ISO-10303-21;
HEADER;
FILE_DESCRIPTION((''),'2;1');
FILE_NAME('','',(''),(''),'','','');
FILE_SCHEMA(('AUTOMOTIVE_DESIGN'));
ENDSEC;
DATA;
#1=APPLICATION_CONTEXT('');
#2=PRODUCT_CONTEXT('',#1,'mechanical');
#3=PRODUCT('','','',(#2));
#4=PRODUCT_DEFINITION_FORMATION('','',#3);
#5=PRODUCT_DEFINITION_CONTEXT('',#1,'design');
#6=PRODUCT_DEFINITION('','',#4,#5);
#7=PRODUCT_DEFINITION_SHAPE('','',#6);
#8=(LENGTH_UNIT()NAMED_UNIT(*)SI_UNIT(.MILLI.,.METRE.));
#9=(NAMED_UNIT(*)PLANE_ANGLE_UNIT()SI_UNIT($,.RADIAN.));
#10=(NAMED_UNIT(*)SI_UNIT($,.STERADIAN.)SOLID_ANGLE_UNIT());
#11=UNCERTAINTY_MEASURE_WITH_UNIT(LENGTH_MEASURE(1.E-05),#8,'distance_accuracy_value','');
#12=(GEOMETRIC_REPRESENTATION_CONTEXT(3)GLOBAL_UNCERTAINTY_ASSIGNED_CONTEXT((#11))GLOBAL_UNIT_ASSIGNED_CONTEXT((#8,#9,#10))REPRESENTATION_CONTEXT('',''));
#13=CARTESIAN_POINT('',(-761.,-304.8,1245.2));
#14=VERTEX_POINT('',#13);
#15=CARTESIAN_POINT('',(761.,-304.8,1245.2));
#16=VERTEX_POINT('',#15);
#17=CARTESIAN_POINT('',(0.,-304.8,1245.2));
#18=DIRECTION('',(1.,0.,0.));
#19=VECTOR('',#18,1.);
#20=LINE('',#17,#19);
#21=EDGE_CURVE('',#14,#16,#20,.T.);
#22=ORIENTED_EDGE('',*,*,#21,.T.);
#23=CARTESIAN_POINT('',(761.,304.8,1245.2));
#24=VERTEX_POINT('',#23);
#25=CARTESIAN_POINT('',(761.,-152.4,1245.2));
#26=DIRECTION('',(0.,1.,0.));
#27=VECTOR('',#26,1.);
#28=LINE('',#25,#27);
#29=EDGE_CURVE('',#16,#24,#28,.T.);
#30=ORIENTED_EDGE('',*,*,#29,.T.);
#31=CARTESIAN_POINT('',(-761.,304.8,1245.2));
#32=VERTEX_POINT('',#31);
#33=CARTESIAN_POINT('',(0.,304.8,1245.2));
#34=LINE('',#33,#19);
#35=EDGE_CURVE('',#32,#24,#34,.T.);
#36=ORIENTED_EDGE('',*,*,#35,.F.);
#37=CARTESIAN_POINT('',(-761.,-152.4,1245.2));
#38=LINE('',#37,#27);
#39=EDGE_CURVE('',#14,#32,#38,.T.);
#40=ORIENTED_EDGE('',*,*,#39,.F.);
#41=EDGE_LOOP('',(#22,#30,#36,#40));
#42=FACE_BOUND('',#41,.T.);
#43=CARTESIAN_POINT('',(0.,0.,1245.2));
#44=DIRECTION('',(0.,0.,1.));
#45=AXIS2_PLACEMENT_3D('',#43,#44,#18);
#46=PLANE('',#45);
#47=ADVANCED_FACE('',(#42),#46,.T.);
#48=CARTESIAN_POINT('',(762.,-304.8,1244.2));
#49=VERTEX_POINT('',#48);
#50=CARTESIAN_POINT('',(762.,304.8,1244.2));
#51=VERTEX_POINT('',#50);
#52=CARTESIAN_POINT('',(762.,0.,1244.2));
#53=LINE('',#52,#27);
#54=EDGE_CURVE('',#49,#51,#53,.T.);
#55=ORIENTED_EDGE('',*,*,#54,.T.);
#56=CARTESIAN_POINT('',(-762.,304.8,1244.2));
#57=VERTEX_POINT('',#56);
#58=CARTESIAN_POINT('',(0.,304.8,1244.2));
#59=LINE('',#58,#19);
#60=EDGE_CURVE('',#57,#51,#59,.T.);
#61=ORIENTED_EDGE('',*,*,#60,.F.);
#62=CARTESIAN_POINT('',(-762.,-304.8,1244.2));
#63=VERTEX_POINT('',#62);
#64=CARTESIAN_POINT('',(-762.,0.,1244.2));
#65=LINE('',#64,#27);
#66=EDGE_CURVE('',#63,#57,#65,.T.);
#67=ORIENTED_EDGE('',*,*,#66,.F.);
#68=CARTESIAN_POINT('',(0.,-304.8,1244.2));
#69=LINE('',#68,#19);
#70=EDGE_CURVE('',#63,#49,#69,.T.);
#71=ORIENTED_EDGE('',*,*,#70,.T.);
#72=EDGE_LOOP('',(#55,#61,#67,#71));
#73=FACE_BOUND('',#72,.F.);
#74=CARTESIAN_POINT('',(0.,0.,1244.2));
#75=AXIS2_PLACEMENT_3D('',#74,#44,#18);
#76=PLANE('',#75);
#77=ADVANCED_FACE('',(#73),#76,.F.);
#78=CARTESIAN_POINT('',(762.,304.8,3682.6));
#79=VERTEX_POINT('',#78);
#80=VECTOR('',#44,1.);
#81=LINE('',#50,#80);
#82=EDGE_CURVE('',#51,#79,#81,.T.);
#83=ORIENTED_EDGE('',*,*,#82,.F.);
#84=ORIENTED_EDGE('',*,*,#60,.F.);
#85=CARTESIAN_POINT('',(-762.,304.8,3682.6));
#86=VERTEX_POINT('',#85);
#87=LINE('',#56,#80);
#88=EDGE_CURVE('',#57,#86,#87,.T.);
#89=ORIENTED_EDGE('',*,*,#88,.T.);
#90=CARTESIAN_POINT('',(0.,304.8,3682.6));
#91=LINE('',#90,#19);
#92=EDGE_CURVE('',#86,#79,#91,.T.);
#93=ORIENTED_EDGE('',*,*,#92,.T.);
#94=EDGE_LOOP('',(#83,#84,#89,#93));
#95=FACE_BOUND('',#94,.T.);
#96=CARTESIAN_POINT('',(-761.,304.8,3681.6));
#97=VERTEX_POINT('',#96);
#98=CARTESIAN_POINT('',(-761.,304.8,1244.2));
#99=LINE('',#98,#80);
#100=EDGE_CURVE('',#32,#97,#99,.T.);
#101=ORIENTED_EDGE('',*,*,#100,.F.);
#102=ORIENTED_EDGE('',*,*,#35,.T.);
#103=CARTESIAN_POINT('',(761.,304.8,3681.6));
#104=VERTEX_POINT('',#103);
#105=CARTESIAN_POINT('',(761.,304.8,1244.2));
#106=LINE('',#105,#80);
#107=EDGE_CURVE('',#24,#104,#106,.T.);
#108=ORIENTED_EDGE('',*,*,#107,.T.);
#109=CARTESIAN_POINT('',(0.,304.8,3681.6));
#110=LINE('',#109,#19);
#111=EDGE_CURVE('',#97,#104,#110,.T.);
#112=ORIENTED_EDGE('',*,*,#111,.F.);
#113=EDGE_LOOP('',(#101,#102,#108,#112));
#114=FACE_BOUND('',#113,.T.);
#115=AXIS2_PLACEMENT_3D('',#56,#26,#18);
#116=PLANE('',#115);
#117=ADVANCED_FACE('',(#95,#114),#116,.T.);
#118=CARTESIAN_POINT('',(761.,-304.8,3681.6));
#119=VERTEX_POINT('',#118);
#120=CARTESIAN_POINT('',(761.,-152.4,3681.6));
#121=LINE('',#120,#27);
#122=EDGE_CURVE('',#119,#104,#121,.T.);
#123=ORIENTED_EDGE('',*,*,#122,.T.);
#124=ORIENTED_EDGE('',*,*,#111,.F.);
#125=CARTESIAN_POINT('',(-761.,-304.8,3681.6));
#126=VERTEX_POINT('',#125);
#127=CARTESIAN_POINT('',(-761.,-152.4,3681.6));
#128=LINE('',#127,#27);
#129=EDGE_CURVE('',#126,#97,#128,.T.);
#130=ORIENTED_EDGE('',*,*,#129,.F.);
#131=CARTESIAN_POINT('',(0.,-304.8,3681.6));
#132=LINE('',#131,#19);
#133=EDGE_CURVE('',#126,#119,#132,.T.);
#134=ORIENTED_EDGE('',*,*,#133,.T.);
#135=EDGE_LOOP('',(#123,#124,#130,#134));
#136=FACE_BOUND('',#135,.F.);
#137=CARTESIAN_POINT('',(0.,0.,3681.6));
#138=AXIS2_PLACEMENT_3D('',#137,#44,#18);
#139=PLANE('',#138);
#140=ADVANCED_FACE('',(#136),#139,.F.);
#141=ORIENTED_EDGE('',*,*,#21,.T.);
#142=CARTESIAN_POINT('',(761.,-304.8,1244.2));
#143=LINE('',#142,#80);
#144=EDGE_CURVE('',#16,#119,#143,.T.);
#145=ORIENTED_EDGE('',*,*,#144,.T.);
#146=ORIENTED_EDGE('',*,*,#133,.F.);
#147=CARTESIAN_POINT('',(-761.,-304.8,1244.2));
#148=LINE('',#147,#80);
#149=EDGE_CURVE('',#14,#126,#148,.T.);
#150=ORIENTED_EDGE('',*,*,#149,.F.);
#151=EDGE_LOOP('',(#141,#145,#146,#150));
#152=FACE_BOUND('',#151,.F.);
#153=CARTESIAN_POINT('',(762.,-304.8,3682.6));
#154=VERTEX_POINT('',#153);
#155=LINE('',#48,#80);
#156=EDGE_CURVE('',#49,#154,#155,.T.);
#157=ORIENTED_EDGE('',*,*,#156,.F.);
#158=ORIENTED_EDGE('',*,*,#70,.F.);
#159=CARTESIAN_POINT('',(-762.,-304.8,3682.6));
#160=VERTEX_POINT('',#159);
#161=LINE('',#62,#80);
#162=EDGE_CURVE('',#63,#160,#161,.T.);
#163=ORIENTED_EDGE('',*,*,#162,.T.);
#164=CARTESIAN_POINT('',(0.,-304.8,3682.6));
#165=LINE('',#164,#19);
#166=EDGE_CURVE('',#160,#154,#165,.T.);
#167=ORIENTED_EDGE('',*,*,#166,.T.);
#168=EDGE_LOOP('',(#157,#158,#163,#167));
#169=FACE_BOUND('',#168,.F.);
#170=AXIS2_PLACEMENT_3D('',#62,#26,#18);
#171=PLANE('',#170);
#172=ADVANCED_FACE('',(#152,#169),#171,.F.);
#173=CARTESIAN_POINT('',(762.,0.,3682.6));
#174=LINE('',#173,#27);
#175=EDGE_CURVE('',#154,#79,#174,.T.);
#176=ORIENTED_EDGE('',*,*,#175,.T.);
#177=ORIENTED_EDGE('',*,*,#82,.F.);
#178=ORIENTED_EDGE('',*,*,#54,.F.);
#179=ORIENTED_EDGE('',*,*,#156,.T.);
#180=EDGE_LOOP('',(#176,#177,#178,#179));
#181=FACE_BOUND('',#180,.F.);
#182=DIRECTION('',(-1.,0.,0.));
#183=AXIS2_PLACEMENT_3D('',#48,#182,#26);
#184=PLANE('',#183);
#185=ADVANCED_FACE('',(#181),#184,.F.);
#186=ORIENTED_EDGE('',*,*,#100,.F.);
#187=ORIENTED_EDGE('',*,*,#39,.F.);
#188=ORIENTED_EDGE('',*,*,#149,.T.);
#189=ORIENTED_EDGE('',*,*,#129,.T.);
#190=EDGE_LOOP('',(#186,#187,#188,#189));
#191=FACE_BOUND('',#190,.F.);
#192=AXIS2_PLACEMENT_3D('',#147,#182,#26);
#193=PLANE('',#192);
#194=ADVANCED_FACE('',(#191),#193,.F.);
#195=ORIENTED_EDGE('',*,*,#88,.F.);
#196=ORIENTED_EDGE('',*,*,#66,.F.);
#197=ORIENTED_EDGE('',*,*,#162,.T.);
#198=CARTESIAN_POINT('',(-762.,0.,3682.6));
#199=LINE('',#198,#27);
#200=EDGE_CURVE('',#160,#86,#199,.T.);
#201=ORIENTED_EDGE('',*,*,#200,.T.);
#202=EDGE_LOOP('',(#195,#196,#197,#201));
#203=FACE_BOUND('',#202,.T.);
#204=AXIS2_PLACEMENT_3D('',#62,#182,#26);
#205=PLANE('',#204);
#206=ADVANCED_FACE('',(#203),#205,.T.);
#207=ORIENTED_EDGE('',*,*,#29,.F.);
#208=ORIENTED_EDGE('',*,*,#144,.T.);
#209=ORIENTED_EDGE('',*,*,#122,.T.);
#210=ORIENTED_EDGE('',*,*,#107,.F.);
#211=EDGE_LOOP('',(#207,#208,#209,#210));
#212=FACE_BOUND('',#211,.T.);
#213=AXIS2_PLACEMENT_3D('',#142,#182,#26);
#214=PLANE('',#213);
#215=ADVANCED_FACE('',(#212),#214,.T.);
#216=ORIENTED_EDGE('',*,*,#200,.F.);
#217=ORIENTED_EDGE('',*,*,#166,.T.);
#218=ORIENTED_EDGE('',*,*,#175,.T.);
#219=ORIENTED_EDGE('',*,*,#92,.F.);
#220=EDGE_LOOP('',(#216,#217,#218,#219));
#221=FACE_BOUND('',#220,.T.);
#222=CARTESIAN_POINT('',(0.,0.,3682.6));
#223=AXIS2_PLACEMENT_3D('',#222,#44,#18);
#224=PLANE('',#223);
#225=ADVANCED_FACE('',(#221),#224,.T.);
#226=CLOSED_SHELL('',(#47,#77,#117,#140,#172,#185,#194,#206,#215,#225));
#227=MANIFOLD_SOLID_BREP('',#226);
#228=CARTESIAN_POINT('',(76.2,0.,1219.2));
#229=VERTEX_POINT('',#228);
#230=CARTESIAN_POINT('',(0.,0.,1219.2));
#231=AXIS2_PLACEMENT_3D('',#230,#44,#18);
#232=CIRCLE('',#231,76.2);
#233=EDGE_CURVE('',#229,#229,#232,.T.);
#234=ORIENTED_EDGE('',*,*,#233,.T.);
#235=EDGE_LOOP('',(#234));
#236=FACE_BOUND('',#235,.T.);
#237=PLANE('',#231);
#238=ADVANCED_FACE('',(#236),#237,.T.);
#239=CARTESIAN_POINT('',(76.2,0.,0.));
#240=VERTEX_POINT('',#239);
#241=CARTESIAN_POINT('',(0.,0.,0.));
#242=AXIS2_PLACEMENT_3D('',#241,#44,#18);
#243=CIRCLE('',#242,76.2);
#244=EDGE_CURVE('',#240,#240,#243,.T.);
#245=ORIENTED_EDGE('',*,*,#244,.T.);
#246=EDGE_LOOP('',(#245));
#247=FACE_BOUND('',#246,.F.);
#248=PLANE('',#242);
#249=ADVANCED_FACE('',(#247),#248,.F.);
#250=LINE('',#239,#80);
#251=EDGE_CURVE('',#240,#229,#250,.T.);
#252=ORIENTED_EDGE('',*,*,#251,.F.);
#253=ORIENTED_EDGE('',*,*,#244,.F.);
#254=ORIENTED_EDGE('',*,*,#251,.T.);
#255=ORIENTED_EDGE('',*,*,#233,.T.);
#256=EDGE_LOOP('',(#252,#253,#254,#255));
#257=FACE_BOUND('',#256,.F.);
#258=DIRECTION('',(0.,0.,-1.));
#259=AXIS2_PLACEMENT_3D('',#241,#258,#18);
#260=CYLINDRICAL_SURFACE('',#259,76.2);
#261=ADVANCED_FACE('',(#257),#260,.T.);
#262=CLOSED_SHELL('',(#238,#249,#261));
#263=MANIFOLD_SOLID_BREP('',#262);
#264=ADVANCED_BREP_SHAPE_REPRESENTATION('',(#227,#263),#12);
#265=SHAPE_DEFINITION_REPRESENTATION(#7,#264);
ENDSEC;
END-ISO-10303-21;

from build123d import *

# Parameters (mm, degrees)
F0_R     = 76.2
F1_DEPTH = 1219.2
F3_W     = 1524
F3_H     = 609.6
F4_DEPTH = 2438.4
F5_T     = -1


# Not quite as in the source:
# - the program builds the solid bodies; features that only make, move or delete a surface that nothing else refers to are left out


with BuildPart() as f1:
    # F0 (on Top) → F1 (new body)
    with BuildSketch(Plane.XY):
        Circle(F0_R)
    extrude(amount=F1_DEPTH)


with BuildPart() as f4:
    # F3 (on offset) → F4 (new body)
    with BuildSketch(Plane.XY.offset(1244.2)):
        Rectangle(F3_W, F3_H)
    extrude(amount=F4_DEPTH)

    # F5
    f5_openings = [f4.faces().sort_by_distance(p)[0] for p in [
        (0, -304.8, 2463.4),
        (0, 304.8, 2463.4),
    ]]
    offset(amount=F5_T, openings=f5_openings)


solid = Compound([f1.part, f4.part])
